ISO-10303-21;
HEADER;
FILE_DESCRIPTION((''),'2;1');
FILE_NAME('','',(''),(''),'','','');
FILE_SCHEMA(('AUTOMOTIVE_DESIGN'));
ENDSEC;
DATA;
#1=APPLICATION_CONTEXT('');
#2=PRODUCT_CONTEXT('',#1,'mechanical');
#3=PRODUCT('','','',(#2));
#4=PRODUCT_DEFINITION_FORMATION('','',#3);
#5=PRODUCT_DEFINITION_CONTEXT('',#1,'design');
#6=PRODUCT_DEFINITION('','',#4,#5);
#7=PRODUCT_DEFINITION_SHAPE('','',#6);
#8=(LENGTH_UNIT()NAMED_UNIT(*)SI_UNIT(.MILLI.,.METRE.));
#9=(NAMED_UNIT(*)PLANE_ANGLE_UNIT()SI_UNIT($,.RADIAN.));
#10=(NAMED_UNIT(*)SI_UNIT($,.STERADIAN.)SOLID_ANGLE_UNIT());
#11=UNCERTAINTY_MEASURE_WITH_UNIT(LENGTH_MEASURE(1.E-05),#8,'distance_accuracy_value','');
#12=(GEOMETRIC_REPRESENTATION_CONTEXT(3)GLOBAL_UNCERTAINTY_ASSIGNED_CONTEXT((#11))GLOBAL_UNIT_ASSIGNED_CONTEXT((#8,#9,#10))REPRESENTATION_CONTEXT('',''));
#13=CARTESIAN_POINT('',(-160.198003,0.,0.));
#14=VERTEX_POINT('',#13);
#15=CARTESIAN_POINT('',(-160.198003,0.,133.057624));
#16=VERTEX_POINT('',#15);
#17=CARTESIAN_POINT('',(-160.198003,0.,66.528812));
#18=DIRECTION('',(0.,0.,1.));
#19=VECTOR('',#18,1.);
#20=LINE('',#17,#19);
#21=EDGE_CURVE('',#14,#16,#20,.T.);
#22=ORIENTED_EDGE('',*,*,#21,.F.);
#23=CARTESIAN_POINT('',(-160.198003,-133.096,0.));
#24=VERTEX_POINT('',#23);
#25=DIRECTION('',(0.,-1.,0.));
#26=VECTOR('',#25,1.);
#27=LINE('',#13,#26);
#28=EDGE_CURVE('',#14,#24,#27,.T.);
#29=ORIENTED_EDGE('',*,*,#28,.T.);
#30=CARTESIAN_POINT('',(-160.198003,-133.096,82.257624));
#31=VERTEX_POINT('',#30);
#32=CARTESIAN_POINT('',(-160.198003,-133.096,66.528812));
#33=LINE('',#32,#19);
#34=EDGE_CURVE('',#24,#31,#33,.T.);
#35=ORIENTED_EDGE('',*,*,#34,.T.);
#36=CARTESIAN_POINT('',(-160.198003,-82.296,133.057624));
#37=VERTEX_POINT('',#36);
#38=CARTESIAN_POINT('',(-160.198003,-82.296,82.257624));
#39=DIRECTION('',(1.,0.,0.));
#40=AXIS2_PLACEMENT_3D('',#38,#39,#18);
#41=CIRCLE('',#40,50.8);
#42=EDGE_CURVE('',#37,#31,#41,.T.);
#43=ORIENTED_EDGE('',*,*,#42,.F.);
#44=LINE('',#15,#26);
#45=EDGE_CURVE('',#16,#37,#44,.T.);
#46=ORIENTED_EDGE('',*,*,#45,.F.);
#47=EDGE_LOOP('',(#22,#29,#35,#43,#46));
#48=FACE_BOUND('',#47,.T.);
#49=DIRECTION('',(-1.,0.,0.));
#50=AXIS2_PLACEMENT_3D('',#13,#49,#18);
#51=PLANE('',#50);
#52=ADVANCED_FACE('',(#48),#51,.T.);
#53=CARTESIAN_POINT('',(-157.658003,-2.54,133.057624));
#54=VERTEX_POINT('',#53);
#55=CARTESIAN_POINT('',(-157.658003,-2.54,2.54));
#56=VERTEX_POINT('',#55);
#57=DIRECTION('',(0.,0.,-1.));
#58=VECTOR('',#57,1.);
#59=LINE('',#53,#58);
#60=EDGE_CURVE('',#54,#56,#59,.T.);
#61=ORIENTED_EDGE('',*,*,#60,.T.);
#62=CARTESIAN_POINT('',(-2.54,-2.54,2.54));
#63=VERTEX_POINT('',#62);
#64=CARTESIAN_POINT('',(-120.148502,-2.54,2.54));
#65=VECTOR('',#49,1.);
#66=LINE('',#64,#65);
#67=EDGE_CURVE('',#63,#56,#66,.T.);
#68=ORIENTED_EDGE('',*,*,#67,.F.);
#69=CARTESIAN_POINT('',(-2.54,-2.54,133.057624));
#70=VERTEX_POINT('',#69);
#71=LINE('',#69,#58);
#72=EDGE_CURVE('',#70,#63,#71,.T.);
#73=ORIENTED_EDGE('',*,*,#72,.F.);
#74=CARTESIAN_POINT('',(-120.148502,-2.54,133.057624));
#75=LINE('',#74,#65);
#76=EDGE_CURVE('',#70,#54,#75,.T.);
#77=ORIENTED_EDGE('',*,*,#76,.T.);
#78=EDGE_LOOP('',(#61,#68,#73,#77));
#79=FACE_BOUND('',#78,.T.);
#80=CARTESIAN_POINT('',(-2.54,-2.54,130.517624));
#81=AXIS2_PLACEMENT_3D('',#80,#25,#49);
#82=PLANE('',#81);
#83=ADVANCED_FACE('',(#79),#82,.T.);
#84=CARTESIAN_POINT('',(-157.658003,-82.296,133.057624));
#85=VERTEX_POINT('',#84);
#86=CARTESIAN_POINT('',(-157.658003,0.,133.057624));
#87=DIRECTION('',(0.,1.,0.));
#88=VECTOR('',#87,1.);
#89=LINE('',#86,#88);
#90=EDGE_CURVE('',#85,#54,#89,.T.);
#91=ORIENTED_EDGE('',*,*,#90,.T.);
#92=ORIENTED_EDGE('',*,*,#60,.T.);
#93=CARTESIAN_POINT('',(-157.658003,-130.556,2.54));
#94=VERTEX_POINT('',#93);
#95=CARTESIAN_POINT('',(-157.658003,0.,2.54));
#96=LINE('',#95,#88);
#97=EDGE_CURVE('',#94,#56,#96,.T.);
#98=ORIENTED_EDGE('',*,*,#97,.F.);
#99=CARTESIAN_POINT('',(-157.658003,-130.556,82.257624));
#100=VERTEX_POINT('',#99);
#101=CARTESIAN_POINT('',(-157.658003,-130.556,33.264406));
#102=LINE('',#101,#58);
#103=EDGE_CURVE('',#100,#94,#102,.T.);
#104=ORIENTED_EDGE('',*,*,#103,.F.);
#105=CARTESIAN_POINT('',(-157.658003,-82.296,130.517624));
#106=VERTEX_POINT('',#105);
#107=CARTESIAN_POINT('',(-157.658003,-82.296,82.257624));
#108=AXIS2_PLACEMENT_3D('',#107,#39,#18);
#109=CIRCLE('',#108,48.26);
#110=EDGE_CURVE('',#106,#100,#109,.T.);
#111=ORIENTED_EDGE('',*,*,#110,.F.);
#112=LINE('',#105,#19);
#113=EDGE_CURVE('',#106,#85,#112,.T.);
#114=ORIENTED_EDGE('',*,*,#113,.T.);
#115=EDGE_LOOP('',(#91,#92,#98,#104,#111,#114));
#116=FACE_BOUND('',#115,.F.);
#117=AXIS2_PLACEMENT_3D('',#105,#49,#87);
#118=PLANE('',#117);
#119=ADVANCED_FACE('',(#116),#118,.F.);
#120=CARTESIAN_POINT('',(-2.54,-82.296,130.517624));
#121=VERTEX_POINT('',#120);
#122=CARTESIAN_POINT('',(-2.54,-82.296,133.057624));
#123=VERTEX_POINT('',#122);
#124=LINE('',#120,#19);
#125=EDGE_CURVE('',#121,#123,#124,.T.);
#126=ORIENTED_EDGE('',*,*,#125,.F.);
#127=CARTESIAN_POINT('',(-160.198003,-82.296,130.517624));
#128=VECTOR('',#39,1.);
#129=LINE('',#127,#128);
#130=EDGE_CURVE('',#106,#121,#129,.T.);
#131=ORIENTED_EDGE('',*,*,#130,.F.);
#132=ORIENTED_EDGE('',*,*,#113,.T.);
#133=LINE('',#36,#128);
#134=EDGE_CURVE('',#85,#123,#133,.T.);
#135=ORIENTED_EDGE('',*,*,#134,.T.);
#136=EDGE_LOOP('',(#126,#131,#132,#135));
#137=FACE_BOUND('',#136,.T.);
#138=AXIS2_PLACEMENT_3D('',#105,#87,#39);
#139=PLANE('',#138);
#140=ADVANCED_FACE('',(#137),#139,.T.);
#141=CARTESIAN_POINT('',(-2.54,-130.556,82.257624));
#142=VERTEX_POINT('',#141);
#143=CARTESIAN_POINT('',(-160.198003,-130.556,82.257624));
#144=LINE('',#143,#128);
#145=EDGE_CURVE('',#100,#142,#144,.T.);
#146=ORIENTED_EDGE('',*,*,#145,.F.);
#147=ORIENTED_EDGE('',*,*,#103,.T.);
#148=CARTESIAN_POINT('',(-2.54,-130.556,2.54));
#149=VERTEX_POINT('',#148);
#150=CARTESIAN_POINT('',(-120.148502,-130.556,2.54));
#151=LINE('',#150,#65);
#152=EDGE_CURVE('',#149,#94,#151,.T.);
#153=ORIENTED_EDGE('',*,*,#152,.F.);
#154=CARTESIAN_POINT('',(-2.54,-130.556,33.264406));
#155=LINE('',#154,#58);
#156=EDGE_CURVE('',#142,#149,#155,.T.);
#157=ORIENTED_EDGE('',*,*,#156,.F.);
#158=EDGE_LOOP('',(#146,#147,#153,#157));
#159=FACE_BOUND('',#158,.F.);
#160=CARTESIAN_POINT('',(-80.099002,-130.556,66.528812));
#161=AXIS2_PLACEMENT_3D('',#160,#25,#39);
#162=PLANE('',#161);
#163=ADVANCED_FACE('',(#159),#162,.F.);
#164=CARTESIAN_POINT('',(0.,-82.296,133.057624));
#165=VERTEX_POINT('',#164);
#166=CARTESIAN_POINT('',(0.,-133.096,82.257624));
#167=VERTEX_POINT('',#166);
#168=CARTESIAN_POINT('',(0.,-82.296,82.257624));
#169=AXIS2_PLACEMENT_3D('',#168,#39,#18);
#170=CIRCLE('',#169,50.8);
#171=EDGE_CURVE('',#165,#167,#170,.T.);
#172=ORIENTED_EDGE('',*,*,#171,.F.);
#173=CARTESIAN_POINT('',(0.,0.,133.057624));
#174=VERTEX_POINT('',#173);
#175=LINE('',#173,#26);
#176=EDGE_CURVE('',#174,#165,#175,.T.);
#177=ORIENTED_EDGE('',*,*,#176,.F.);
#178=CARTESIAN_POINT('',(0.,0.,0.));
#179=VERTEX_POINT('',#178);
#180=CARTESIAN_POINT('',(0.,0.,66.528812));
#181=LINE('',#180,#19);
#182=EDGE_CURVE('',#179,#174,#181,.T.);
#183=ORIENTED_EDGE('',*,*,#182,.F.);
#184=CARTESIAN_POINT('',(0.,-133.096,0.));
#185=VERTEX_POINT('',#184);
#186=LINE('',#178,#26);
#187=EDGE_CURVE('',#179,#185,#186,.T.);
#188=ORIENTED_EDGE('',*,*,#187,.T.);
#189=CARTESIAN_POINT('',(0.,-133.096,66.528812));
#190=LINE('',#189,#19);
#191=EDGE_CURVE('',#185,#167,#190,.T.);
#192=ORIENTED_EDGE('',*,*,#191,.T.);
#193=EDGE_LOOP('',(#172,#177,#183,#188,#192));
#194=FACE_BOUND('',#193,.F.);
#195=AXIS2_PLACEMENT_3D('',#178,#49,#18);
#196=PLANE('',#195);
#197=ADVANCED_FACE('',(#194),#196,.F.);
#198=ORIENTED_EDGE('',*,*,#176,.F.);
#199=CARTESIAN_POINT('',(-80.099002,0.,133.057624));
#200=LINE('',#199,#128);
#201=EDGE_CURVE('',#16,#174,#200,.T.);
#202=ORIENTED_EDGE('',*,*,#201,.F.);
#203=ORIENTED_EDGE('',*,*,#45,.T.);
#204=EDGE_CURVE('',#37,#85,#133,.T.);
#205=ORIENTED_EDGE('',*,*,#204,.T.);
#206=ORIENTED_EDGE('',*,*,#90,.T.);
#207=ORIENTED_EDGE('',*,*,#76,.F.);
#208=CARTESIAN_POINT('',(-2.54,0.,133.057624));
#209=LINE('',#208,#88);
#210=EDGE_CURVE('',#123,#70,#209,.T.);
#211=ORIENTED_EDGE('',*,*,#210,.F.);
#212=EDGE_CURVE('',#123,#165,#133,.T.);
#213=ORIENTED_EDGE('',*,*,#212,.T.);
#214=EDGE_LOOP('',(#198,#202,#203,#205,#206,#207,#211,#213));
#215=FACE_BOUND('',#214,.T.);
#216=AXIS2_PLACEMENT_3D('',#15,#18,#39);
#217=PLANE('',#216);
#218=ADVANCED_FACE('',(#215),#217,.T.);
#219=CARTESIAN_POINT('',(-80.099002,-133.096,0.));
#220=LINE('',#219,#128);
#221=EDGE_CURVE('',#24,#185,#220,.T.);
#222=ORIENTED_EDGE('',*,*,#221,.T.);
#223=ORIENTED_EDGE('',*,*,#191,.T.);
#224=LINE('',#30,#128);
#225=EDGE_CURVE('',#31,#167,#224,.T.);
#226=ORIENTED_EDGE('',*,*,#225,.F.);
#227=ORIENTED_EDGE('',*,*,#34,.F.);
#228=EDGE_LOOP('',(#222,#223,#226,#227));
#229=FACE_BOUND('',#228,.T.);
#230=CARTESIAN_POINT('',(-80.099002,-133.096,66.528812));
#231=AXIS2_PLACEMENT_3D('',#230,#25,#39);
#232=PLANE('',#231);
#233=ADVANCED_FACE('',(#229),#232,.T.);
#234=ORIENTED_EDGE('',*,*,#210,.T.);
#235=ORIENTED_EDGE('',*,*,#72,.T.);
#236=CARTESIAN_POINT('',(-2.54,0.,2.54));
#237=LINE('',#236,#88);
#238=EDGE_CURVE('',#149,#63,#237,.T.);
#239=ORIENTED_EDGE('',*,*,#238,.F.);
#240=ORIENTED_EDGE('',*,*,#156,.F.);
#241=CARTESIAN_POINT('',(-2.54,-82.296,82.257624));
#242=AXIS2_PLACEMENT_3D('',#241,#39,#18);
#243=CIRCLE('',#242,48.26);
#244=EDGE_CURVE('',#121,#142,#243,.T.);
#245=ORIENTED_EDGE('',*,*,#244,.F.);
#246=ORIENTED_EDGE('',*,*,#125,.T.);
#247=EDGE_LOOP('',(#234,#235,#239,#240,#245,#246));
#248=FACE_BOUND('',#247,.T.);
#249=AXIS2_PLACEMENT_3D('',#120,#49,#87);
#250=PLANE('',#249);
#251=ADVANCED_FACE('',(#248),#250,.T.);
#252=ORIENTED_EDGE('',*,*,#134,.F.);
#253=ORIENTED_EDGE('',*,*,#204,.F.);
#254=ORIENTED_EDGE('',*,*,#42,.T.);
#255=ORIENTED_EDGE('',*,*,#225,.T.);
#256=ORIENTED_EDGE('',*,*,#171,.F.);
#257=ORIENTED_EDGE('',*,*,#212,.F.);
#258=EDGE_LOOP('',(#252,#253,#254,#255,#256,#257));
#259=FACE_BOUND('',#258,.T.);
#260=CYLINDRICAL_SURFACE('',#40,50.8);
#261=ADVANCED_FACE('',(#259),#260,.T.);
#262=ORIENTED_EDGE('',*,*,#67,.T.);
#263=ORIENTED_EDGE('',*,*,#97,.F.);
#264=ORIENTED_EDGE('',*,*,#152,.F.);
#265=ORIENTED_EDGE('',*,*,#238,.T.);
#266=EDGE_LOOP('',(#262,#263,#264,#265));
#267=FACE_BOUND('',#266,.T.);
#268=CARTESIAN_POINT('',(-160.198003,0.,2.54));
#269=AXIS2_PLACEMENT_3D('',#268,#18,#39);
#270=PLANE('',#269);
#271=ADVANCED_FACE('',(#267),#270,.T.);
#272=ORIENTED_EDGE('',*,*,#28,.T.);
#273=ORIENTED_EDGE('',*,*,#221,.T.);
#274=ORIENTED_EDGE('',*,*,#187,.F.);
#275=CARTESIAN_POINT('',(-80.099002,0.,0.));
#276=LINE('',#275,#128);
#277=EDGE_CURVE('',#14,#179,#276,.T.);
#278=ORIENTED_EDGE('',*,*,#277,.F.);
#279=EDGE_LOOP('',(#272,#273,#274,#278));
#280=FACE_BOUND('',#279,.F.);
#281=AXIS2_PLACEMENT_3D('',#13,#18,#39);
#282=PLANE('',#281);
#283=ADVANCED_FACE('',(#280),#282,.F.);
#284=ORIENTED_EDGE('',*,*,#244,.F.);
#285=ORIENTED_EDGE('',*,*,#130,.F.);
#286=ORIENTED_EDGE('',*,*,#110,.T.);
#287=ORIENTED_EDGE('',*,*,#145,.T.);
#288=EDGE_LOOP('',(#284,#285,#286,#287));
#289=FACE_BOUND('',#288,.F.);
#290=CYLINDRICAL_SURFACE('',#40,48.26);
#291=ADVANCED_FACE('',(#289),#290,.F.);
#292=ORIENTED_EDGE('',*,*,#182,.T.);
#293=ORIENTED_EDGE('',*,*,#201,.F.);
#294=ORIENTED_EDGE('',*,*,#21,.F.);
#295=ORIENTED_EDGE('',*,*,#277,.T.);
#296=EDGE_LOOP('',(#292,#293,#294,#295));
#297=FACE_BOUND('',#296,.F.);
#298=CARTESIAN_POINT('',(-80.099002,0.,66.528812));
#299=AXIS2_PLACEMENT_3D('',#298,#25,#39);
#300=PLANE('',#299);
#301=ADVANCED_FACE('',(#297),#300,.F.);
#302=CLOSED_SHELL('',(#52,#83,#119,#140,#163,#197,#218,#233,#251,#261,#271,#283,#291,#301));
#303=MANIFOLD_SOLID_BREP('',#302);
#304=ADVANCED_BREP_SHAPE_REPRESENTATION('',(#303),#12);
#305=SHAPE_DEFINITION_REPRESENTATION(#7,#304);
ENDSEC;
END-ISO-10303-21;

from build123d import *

# Parameters (mm, degrees)
F0_W     = 160.1980030537
F0_H     = 133.0576241016
F1_DEPTH = 133.096
F2_R     = 50.8
F3_T     = -2.54


# Not quite as in the source:
# - a shell that OpenCascade refuses in one call is made with other operations: the cavity is built on its own and cut out


with BuildPart() as f1:
    # F0 (on Front) → F1 (new body)
    with BuildSketch(Plane.XZ):
        with Locations((-80.0990015268, 66.5288120508)):
            Rectangle(F0_W, F0_H)
    extrude(amount=F1_DEPTH)

    # F2
    f2_edges = [f1.edges().sort_by_distance(p)[0] for p in [
        (-80.099002, -133.096, 133.057624),
    ]]
    fillet(f2_edges, radius=F2_R)

    # F3: a shell. OpenCascade refuses it in one call, so the cavity is built on its own and cut out:
    # the body offset inwards by the wall thickness, plus a prism from it out through each open face.
    f3_core = offset(f1.part, amount=F3_T, mode=Mode.PRIVATE)
    f3_exits = [f3_core.faces().sort_by_distance(p)[0] for p in [
        (-80.099002, -42.418, 130.517624),
    ]]
    add(f3_core, mode=Mode.SUBTRACT)
    extrude(f3_exits, amount=-F3_T, mode=Mode.SUBTRACT)


solid = f1.part
